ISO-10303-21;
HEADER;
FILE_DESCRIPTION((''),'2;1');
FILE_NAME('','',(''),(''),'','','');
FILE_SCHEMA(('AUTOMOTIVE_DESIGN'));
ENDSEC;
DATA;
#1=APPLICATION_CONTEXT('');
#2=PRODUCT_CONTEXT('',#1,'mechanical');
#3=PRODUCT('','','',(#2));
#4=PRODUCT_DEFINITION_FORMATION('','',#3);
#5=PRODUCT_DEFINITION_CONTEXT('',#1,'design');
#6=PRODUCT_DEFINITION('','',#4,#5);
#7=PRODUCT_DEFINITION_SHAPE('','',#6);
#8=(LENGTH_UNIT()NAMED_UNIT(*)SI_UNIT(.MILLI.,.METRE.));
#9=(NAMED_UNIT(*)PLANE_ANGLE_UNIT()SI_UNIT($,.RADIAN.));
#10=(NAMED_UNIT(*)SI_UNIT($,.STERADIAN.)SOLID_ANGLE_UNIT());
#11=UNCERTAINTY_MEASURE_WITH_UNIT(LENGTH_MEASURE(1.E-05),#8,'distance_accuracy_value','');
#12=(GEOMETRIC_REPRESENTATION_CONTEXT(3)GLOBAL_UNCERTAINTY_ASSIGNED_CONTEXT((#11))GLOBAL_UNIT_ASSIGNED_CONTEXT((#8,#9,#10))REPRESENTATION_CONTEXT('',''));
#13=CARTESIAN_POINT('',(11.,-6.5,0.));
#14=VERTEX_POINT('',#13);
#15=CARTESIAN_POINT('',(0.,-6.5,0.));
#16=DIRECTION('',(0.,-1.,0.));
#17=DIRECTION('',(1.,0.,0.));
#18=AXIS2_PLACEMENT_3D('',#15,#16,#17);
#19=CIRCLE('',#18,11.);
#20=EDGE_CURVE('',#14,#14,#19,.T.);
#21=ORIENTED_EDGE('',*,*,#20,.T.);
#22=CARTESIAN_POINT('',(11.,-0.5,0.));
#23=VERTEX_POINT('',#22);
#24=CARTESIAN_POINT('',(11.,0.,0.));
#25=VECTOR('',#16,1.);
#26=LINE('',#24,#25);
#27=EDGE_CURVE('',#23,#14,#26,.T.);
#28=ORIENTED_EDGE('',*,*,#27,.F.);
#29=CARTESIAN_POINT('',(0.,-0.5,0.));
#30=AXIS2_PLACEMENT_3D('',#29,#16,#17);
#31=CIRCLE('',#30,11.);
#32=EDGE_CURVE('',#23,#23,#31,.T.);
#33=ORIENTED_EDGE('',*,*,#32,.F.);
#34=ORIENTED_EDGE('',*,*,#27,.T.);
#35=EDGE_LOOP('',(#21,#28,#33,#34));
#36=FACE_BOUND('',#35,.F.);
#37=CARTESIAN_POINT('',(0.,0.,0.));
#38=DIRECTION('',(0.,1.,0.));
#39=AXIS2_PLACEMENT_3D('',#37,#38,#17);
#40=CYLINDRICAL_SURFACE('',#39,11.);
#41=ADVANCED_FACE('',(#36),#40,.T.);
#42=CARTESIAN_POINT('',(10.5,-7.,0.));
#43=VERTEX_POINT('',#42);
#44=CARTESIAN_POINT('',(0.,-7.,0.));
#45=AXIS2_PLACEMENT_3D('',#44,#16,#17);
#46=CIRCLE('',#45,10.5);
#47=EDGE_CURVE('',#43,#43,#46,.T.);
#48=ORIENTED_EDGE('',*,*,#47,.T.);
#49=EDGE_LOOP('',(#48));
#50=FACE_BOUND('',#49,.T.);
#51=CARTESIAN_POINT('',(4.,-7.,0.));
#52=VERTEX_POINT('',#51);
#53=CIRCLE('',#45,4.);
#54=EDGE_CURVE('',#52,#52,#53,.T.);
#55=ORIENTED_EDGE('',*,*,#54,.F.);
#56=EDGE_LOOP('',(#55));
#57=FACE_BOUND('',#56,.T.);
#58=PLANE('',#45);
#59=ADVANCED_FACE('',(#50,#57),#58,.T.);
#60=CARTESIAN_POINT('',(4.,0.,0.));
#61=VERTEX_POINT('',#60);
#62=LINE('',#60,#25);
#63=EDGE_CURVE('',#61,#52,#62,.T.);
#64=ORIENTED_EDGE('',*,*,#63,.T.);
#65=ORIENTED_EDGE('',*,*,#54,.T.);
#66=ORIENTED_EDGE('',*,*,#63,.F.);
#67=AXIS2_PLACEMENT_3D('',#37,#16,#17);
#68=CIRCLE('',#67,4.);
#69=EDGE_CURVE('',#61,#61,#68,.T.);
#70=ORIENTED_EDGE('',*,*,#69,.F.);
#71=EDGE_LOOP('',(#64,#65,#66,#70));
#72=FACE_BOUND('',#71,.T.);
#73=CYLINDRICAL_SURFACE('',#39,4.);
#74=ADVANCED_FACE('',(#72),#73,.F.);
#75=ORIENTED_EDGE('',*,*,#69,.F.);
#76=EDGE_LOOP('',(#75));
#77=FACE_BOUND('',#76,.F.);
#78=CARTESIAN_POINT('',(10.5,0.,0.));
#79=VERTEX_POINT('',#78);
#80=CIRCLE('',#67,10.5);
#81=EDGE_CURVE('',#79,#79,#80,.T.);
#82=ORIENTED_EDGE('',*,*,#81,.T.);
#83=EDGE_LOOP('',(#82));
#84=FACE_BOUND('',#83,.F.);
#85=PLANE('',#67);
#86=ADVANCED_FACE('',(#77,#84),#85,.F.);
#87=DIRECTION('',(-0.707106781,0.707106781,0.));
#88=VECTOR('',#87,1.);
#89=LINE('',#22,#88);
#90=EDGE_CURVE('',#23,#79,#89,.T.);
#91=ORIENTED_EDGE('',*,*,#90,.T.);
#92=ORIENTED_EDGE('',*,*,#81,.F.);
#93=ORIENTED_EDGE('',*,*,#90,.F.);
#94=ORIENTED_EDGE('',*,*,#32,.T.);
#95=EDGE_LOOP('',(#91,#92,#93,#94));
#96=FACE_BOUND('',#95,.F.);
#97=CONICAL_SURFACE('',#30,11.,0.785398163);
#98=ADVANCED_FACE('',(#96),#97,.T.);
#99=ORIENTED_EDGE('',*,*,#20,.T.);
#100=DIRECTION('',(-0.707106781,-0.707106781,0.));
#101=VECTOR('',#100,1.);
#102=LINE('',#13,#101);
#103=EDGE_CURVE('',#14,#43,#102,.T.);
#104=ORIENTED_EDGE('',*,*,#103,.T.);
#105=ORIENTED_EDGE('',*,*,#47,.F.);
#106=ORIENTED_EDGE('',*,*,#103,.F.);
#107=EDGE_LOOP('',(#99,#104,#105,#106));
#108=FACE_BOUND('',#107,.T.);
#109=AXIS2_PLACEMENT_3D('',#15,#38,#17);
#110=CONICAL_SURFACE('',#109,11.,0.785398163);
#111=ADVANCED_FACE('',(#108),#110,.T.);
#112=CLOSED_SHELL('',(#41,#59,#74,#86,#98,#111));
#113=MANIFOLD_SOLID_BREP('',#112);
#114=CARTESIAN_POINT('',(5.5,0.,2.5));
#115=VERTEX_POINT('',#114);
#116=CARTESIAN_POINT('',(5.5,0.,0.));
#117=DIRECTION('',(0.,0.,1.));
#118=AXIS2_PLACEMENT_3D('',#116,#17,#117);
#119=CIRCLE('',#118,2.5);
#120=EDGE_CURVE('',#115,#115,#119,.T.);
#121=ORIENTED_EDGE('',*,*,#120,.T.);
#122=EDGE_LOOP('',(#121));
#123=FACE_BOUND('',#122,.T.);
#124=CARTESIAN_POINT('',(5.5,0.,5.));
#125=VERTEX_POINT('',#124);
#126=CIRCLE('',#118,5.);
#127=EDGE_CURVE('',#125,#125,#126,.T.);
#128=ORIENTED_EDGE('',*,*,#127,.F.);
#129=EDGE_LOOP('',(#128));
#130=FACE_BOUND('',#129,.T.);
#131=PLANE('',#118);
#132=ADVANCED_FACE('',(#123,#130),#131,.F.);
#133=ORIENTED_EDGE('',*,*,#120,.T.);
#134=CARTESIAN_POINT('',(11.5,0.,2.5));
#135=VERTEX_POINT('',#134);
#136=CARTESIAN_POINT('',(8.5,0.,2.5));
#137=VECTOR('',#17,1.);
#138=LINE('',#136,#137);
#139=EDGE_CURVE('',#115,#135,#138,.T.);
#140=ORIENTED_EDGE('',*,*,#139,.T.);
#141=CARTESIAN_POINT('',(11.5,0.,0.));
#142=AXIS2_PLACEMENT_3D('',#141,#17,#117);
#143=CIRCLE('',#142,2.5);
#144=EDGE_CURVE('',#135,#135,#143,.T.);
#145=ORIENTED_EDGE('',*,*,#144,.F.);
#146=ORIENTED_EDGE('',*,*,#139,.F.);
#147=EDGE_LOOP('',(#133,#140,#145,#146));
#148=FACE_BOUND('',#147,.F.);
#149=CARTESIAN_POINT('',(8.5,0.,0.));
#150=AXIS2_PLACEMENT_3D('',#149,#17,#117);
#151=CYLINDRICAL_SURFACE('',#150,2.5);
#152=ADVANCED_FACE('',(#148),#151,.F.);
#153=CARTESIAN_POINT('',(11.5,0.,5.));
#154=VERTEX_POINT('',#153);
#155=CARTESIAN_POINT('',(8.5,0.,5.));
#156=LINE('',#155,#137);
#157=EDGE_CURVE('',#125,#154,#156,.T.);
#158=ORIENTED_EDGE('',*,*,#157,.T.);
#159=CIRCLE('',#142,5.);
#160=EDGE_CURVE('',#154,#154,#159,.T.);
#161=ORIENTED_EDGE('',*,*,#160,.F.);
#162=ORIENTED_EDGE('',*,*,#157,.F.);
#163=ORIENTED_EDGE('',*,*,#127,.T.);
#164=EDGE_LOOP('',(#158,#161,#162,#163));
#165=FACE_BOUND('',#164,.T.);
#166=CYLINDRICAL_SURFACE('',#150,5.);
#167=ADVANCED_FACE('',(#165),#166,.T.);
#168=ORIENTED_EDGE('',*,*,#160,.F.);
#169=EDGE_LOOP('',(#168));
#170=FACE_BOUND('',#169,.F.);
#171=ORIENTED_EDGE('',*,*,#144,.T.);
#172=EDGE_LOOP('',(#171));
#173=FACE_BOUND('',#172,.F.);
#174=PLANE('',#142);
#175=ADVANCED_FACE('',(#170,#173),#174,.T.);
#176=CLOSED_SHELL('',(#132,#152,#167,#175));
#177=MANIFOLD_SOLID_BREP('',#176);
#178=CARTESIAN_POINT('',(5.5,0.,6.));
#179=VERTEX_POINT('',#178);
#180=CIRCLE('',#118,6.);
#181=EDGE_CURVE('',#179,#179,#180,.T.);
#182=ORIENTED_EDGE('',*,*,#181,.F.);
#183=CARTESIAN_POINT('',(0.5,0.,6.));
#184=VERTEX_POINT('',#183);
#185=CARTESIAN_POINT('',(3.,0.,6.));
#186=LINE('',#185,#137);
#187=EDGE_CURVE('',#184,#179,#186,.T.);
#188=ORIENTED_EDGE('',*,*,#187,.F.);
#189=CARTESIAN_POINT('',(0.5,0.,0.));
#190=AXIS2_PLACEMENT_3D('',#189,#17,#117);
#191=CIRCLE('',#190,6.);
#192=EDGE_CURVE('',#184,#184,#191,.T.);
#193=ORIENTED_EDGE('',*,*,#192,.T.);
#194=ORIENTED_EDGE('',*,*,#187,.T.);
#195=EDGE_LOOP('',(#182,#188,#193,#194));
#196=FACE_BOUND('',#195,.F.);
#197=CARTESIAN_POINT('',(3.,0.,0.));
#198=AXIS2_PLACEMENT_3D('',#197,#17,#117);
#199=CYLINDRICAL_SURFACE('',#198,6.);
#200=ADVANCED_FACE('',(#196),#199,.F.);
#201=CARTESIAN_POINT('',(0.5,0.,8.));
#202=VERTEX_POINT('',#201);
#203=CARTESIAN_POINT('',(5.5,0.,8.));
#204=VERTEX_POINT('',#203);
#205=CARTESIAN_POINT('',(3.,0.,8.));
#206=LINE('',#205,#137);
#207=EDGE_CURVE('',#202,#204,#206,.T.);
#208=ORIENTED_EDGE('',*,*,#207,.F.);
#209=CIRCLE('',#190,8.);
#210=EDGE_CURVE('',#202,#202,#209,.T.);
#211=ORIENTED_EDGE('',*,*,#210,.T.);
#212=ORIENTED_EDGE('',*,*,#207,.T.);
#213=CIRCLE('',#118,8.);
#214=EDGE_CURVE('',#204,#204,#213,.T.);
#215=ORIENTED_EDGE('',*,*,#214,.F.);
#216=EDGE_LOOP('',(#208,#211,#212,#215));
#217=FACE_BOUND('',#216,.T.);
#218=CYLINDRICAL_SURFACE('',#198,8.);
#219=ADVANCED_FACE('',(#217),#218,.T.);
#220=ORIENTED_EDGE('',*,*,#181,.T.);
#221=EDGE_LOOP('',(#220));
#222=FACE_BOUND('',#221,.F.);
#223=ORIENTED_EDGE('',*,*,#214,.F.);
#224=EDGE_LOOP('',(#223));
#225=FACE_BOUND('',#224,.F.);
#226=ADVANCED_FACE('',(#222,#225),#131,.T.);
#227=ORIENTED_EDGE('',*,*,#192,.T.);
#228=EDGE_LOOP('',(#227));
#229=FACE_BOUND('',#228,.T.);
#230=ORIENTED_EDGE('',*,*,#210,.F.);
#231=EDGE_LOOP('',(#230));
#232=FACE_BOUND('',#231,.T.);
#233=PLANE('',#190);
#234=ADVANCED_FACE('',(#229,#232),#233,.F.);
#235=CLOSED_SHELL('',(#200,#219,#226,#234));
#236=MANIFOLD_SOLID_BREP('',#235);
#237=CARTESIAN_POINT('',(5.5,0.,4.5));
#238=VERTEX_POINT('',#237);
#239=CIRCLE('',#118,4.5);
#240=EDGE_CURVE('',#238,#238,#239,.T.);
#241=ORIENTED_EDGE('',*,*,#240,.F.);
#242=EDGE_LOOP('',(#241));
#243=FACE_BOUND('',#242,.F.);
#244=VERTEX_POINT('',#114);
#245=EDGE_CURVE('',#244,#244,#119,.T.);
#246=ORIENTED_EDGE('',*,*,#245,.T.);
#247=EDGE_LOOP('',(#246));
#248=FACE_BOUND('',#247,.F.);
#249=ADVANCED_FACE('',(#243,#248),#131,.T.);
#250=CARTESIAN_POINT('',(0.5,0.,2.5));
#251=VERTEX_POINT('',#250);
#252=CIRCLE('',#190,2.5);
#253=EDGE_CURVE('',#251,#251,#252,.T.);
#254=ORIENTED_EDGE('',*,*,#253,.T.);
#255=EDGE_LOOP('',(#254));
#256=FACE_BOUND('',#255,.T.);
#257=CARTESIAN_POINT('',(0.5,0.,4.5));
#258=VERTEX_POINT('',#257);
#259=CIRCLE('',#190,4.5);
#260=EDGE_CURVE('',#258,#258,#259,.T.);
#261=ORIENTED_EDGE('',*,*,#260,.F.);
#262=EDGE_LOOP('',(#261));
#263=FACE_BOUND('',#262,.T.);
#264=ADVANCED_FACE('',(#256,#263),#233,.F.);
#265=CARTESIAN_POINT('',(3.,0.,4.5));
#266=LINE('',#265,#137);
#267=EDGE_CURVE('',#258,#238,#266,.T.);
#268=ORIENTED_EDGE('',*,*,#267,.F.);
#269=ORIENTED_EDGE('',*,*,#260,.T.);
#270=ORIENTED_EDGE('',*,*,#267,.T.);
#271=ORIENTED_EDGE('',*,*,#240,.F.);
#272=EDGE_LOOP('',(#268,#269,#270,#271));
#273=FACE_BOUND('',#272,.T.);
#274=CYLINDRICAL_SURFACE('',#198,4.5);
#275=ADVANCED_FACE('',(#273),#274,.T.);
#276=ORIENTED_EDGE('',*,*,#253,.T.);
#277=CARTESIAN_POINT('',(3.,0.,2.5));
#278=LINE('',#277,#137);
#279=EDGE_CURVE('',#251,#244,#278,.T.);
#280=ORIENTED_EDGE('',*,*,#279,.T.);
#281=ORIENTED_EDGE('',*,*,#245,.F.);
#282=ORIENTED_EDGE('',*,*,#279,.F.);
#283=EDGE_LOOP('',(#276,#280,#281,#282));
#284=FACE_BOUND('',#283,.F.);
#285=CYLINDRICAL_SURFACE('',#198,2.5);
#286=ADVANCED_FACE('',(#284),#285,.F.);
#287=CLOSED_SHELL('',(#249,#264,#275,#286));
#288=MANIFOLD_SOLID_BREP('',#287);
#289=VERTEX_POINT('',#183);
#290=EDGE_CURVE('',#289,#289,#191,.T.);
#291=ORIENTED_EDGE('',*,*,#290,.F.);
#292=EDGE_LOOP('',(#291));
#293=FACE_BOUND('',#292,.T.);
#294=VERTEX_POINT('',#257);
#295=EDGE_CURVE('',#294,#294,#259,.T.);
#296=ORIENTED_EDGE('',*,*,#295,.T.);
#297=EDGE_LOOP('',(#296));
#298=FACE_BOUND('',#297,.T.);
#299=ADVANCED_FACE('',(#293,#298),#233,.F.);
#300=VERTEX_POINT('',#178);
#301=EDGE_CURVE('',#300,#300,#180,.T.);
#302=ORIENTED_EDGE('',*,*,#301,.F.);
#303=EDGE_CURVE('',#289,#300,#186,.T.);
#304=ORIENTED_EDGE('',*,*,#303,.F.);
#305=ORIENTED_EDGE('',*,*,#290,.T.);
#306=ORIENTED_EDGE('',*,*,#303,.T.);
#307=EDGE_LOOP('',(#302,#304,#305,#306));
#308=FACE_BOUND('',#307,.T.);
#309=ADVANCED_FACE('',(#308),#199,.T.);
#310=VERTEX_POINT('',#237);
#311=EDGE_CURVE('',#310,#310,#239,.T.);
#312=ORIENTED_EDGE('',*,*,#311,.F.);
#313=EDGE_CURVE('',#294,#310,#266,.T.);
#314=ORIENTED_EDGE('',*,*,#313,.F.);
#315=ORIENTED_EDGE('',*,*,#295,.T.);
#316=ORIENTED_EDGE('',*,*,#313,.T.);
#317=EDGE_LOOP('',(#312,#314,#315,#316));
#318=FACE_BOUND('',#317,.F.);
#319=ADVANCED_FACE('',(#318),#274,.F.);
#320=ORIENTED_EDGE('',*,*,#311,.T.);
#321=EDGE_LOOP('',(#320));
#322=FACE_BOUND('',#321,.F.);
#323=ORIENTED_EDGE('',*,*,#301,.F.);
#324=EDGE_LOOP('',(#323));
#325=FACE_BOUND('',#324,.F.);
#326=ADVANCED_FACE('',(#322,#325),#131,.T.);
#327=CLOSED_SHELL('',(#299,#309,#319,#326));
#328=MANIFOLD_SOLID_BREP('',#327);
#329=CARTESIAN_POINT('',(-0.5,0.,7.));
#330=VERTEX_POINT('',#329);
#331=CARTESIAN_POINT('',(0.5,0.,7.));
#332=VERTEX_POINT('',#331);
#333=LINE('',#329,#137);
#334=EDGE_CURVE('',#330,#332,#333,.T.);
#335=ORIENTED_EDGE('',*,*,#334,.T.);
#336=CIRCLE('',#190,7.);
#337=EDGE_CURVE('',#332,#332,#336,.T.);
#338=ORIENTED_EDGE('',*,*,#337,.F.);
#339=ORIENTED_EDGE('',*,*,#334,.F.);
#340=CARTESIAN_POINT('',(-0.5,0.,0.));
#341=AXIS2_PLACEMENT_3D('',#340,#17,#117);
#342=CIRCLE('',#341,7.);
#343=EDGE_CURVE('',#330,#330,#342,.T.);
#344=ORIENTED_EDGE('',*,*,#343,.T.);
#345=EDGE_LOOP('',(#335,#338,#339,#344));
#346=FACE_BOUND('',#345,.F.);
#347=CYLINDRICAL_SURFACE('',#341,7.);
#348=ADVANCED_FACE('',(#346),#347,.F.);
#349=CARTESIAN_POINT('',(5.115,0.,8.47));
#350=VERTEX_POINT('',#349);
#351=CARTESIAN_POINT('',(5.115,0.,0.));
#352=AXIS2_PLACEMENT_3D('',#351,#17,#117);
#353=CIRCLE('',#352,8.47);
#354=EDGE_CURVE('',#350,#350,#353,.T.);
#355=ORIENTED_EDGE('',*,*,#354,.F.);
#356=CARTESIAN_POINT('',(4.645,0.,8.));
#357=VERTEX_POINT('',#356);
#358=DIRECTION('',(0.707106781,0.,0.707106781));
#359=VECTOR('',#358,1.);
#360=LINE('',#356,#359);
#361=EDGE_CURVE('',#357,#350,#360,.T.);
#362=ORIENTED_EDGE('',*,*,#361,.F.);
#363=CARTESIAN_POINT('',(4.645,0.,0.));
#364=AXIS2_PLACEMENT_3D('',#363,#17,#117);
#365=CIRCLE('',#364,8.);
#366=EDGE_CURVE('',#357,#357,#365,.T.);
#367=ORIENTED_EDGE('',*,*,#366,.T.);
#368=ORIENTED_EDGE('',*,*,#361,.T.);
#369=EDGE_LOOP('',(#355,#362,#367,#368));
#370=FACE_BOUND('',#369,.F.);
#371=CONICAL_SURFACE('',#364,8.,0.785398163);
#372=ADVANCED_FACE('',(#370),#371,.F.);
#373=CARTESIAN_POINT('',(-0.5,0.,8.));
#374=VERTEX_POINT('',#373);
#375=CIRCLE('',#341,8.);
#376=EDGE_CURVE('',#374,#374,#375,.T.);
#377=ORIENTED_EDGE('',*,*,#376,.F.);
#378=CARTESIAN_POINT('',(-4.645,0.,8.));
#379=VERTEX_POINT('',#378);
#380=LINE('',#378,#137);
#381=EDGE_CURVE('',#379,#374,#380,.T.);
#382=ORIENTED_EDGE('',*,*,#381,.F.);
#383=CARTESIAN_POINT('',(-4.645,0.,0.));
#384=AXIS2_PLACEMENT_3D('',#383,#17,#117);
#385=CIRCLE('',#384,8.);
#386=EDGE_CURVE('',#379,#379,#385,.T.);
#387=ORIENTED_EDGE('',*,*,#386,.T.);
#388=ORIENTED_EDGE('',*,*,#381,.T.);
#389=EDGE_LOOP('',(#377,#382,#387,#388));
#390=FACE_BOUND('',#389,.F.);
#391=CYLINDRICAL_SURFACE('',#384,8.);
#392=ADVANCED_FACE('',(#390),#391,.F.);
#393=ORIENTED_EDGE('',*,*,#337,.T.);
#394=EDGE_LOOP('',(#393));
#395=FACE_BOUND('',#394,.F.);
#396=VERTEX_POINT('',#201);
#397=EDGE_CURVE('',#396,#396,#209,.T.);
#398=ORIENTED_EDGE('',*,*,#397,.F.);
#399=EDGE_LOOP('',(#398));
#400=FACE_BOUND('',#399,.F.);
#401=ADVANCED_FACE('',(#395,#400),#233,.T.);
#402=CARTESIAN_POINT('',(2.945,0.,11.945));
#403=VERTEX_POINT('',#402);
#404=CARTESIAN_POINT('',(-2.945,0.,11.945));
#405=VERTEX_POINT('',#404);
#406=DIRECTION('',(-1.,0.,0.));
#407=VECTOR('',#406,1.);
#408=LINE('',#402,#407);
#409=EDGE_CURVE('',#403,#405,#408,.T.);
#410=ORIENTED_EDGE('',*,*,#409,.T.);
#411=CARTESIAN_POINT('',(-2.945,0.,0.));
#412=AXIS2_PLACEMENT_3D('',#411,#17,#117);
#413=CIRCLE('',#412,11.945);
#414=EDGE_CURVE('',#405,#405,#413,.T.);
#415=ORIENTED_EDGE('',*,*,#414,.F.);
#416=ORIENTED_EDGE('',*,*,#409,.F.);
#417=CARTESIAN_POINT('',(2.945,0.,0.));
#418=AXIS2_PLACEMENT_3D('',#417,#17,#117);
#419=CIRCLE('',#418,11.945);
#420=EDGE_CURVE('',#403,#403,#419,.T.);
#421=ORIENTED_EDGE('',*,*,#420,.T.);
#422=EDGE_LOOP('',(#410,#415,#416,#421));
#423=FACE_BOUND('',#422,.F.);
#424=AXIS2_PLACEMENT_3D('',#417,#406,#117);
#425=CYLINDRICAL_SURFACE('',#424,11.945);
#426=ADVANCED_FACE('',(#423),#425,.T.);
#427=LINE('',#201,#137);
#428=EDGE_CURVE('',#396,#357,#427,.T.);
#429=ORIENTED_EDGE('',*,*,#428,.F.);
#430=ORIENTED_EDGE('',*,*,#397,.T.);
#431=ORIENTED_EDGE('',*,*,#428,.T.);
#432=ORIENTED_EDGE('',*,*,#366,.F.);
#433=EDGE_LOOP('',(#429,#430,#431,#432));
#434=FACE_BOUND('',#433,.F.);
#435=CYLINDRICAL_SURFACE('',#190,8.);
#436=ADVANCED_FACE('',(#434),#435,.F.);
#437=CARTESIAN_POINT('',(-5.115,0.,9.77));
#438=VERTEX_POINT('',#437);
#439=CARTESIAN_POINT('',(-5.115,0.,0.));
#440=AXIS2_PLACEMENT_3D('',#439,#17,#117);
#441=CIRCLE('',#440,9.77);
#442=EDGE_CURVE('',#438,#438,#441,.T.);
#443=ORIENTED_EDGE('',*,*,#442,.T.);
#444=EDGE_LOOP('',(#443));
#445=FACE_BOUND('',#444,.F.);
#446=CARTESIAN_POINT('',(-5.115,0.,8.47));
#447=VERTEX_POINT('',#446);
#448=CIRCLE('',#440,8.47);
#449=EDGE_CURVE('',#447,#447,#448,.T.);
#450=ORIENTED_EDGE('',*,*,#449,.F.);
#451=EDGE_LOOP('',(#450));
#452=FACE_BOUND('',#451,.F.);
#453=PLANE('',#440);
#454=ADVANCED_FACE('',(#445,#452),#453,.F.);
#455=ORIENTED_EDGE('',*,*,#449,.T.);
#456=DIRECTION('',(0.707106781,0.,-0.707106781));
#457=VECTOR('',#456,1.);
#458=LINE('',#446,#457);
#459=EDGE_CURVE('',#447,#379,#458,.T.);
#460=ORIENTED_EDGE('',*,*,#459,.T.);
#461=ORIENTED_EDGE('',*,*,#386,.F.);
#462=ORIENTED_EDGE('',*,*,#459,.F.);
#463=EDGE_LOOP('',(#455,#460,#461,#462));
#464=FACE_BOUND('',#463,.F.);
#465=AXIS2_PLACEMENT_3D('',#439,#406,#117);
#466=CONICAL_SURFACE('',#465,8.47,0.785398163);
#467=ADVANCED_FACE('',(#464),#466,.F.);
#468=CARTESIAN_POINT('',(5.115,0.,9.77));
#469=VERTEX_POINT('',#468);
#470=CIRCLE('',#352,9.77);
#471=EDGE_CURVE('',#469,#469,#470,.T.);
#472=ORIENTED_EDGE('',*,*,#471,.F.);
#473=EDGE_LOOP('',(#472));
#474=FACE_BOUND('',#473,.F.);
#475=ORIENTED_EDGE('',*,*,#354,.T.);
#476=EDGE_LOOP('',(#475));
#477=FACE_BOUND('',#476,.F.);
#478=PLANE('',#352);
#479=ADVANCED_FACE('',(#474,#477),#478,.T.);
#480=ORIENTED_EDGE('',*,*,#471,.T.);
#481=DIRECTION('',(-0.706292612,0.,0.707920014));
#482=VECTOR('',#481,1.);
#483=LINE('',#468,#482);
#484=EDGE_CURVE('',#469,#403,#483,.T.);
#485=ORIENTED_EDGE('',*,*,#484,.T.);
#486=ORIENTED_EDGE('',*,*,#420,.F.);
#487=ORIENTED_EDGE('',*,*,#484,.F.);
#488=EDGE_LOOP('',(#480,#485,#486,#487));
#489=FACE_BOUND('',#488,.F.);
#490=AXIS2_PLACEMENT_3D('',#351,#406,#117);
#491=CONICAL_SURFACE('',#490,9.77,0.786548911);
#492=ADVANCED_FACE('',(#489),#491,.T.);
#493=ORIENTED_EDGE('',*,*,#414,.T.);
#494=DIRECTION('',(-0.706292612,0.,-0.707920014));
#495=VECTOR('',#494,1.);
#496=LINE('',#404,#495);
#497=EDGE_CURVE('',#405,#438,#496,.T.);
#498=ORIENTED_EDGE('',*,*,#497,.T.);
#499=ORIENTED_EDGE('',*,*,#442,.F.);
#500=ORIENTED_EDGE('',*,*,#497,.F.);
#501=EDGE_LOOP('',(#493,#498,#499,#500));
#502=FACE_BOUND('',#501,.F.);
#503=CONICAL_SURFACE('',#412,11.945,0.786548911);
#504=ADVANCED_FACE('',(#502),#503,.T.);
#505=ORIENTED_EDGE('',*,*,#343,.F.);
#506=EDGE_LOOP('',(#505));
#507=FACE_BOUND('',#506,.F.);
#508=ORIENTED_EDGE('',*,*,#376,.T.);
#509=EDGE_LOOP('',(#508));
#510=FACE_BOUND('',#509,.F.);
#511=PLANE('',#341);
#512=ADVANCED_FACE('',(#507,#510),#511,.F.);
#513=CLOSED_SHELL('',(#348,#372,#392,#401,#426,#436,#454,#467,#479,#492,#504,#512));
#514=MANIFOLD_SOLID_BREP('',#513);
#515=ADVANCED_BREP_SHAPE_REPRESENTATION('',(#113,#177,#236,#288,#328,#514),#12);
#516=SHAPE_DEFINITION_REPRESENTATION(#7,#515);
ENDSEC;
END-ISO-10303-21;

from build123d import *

# Parameters (mm, degrees)
F1_W     = 5
F1_H     = 2
F1_H_2   = 1.5
F2_W     = 6
F2_H     = 2.5
F8_R     = 11
F8_R_2   = 4
F9_DEPTH = 7
F10_SIZE = 0.5


# Not quite as in the source:
# - a feature names something its author has since deleted; it is built from what else it names


with BuildPart() as f3:
    # F0 (on Front) → F3 (revolve)
    with BuildSketch(Plane.XZ):
        Polygon((2.945, 11.945), (-2.945, 11.945), (-5.115, 9.77), (-5.115, 8.47), (-4.645, 8), (-0.5, 8), (-0.5, 7), (0.5, 7), (0.5, 8), (4.645, 8), (5.115, 8.47), (5.115, 9.77), align=None)
    revolve(axis=Axis((0.0770290499, 0, 0), (1, 0, 0)))


with BuildPart() as f4:
    # F1 (on Front) → F4 (revolve)
    with BuildSketch(Plane.XZ):
        with Locations((3, 7)):
            Rectangle(F1_W, F1_H)
    revolve(axis=Axis((0.0770290499, 0, 0), (1, 0, 0)))


with BuildPart() as f5:
    # F1 (on Front) → F5 (revolve)
    with BuildSketch(Plane.XZ):
        with Locations((3, 5.25)):
            Rectangle(F1_W, F1_H_2)
    revolve(axis=Axis((0.0770290499, 0, 0), (1, 0, 0)))


with BuildPart() as f6:
    # F1 (on Front) → F6 (revolve)
    with BuildSketch(Plane.XZ):
        with Locations((3, 3.5)):
            Rectangle(F1_W, F1_H)
    revolve(axis=Axis((0.0770290499, 0, 0), (1, 0, 0)))


with BuildPart() as f7:
    # F2 (on Front) → F7 (revolve)
    with BuildSketch(Plane.XZ):
        with Locations((8.5, 3.75)):
            Rectangle(F2_W, F2_H)
    revolve(axis=Axis((0.0770290499, 0, 0), (1, 0, 0)))


with BuildPart() as f9:
    # F8 (on Front) → F9 (new body)
    with BuildSketch(Plane.XZ):
        Circle(F8_R)
        Circle(F8_R_2, mode=Mode.SUBTRACT)
    extrude(amount=F9_DEPTH)

    # F10
    f10_edges = [f9.edges().sort_by_distance(p)[0] for p in [
        (-11, -7, 0),
        (-11, 0, 0),
    ]]
    chamfer(f10_edges, length=F10_SIZE)


solid = Compound([f3.part, f4.part, f5.part, f6.part, f7.part, f9.part])
